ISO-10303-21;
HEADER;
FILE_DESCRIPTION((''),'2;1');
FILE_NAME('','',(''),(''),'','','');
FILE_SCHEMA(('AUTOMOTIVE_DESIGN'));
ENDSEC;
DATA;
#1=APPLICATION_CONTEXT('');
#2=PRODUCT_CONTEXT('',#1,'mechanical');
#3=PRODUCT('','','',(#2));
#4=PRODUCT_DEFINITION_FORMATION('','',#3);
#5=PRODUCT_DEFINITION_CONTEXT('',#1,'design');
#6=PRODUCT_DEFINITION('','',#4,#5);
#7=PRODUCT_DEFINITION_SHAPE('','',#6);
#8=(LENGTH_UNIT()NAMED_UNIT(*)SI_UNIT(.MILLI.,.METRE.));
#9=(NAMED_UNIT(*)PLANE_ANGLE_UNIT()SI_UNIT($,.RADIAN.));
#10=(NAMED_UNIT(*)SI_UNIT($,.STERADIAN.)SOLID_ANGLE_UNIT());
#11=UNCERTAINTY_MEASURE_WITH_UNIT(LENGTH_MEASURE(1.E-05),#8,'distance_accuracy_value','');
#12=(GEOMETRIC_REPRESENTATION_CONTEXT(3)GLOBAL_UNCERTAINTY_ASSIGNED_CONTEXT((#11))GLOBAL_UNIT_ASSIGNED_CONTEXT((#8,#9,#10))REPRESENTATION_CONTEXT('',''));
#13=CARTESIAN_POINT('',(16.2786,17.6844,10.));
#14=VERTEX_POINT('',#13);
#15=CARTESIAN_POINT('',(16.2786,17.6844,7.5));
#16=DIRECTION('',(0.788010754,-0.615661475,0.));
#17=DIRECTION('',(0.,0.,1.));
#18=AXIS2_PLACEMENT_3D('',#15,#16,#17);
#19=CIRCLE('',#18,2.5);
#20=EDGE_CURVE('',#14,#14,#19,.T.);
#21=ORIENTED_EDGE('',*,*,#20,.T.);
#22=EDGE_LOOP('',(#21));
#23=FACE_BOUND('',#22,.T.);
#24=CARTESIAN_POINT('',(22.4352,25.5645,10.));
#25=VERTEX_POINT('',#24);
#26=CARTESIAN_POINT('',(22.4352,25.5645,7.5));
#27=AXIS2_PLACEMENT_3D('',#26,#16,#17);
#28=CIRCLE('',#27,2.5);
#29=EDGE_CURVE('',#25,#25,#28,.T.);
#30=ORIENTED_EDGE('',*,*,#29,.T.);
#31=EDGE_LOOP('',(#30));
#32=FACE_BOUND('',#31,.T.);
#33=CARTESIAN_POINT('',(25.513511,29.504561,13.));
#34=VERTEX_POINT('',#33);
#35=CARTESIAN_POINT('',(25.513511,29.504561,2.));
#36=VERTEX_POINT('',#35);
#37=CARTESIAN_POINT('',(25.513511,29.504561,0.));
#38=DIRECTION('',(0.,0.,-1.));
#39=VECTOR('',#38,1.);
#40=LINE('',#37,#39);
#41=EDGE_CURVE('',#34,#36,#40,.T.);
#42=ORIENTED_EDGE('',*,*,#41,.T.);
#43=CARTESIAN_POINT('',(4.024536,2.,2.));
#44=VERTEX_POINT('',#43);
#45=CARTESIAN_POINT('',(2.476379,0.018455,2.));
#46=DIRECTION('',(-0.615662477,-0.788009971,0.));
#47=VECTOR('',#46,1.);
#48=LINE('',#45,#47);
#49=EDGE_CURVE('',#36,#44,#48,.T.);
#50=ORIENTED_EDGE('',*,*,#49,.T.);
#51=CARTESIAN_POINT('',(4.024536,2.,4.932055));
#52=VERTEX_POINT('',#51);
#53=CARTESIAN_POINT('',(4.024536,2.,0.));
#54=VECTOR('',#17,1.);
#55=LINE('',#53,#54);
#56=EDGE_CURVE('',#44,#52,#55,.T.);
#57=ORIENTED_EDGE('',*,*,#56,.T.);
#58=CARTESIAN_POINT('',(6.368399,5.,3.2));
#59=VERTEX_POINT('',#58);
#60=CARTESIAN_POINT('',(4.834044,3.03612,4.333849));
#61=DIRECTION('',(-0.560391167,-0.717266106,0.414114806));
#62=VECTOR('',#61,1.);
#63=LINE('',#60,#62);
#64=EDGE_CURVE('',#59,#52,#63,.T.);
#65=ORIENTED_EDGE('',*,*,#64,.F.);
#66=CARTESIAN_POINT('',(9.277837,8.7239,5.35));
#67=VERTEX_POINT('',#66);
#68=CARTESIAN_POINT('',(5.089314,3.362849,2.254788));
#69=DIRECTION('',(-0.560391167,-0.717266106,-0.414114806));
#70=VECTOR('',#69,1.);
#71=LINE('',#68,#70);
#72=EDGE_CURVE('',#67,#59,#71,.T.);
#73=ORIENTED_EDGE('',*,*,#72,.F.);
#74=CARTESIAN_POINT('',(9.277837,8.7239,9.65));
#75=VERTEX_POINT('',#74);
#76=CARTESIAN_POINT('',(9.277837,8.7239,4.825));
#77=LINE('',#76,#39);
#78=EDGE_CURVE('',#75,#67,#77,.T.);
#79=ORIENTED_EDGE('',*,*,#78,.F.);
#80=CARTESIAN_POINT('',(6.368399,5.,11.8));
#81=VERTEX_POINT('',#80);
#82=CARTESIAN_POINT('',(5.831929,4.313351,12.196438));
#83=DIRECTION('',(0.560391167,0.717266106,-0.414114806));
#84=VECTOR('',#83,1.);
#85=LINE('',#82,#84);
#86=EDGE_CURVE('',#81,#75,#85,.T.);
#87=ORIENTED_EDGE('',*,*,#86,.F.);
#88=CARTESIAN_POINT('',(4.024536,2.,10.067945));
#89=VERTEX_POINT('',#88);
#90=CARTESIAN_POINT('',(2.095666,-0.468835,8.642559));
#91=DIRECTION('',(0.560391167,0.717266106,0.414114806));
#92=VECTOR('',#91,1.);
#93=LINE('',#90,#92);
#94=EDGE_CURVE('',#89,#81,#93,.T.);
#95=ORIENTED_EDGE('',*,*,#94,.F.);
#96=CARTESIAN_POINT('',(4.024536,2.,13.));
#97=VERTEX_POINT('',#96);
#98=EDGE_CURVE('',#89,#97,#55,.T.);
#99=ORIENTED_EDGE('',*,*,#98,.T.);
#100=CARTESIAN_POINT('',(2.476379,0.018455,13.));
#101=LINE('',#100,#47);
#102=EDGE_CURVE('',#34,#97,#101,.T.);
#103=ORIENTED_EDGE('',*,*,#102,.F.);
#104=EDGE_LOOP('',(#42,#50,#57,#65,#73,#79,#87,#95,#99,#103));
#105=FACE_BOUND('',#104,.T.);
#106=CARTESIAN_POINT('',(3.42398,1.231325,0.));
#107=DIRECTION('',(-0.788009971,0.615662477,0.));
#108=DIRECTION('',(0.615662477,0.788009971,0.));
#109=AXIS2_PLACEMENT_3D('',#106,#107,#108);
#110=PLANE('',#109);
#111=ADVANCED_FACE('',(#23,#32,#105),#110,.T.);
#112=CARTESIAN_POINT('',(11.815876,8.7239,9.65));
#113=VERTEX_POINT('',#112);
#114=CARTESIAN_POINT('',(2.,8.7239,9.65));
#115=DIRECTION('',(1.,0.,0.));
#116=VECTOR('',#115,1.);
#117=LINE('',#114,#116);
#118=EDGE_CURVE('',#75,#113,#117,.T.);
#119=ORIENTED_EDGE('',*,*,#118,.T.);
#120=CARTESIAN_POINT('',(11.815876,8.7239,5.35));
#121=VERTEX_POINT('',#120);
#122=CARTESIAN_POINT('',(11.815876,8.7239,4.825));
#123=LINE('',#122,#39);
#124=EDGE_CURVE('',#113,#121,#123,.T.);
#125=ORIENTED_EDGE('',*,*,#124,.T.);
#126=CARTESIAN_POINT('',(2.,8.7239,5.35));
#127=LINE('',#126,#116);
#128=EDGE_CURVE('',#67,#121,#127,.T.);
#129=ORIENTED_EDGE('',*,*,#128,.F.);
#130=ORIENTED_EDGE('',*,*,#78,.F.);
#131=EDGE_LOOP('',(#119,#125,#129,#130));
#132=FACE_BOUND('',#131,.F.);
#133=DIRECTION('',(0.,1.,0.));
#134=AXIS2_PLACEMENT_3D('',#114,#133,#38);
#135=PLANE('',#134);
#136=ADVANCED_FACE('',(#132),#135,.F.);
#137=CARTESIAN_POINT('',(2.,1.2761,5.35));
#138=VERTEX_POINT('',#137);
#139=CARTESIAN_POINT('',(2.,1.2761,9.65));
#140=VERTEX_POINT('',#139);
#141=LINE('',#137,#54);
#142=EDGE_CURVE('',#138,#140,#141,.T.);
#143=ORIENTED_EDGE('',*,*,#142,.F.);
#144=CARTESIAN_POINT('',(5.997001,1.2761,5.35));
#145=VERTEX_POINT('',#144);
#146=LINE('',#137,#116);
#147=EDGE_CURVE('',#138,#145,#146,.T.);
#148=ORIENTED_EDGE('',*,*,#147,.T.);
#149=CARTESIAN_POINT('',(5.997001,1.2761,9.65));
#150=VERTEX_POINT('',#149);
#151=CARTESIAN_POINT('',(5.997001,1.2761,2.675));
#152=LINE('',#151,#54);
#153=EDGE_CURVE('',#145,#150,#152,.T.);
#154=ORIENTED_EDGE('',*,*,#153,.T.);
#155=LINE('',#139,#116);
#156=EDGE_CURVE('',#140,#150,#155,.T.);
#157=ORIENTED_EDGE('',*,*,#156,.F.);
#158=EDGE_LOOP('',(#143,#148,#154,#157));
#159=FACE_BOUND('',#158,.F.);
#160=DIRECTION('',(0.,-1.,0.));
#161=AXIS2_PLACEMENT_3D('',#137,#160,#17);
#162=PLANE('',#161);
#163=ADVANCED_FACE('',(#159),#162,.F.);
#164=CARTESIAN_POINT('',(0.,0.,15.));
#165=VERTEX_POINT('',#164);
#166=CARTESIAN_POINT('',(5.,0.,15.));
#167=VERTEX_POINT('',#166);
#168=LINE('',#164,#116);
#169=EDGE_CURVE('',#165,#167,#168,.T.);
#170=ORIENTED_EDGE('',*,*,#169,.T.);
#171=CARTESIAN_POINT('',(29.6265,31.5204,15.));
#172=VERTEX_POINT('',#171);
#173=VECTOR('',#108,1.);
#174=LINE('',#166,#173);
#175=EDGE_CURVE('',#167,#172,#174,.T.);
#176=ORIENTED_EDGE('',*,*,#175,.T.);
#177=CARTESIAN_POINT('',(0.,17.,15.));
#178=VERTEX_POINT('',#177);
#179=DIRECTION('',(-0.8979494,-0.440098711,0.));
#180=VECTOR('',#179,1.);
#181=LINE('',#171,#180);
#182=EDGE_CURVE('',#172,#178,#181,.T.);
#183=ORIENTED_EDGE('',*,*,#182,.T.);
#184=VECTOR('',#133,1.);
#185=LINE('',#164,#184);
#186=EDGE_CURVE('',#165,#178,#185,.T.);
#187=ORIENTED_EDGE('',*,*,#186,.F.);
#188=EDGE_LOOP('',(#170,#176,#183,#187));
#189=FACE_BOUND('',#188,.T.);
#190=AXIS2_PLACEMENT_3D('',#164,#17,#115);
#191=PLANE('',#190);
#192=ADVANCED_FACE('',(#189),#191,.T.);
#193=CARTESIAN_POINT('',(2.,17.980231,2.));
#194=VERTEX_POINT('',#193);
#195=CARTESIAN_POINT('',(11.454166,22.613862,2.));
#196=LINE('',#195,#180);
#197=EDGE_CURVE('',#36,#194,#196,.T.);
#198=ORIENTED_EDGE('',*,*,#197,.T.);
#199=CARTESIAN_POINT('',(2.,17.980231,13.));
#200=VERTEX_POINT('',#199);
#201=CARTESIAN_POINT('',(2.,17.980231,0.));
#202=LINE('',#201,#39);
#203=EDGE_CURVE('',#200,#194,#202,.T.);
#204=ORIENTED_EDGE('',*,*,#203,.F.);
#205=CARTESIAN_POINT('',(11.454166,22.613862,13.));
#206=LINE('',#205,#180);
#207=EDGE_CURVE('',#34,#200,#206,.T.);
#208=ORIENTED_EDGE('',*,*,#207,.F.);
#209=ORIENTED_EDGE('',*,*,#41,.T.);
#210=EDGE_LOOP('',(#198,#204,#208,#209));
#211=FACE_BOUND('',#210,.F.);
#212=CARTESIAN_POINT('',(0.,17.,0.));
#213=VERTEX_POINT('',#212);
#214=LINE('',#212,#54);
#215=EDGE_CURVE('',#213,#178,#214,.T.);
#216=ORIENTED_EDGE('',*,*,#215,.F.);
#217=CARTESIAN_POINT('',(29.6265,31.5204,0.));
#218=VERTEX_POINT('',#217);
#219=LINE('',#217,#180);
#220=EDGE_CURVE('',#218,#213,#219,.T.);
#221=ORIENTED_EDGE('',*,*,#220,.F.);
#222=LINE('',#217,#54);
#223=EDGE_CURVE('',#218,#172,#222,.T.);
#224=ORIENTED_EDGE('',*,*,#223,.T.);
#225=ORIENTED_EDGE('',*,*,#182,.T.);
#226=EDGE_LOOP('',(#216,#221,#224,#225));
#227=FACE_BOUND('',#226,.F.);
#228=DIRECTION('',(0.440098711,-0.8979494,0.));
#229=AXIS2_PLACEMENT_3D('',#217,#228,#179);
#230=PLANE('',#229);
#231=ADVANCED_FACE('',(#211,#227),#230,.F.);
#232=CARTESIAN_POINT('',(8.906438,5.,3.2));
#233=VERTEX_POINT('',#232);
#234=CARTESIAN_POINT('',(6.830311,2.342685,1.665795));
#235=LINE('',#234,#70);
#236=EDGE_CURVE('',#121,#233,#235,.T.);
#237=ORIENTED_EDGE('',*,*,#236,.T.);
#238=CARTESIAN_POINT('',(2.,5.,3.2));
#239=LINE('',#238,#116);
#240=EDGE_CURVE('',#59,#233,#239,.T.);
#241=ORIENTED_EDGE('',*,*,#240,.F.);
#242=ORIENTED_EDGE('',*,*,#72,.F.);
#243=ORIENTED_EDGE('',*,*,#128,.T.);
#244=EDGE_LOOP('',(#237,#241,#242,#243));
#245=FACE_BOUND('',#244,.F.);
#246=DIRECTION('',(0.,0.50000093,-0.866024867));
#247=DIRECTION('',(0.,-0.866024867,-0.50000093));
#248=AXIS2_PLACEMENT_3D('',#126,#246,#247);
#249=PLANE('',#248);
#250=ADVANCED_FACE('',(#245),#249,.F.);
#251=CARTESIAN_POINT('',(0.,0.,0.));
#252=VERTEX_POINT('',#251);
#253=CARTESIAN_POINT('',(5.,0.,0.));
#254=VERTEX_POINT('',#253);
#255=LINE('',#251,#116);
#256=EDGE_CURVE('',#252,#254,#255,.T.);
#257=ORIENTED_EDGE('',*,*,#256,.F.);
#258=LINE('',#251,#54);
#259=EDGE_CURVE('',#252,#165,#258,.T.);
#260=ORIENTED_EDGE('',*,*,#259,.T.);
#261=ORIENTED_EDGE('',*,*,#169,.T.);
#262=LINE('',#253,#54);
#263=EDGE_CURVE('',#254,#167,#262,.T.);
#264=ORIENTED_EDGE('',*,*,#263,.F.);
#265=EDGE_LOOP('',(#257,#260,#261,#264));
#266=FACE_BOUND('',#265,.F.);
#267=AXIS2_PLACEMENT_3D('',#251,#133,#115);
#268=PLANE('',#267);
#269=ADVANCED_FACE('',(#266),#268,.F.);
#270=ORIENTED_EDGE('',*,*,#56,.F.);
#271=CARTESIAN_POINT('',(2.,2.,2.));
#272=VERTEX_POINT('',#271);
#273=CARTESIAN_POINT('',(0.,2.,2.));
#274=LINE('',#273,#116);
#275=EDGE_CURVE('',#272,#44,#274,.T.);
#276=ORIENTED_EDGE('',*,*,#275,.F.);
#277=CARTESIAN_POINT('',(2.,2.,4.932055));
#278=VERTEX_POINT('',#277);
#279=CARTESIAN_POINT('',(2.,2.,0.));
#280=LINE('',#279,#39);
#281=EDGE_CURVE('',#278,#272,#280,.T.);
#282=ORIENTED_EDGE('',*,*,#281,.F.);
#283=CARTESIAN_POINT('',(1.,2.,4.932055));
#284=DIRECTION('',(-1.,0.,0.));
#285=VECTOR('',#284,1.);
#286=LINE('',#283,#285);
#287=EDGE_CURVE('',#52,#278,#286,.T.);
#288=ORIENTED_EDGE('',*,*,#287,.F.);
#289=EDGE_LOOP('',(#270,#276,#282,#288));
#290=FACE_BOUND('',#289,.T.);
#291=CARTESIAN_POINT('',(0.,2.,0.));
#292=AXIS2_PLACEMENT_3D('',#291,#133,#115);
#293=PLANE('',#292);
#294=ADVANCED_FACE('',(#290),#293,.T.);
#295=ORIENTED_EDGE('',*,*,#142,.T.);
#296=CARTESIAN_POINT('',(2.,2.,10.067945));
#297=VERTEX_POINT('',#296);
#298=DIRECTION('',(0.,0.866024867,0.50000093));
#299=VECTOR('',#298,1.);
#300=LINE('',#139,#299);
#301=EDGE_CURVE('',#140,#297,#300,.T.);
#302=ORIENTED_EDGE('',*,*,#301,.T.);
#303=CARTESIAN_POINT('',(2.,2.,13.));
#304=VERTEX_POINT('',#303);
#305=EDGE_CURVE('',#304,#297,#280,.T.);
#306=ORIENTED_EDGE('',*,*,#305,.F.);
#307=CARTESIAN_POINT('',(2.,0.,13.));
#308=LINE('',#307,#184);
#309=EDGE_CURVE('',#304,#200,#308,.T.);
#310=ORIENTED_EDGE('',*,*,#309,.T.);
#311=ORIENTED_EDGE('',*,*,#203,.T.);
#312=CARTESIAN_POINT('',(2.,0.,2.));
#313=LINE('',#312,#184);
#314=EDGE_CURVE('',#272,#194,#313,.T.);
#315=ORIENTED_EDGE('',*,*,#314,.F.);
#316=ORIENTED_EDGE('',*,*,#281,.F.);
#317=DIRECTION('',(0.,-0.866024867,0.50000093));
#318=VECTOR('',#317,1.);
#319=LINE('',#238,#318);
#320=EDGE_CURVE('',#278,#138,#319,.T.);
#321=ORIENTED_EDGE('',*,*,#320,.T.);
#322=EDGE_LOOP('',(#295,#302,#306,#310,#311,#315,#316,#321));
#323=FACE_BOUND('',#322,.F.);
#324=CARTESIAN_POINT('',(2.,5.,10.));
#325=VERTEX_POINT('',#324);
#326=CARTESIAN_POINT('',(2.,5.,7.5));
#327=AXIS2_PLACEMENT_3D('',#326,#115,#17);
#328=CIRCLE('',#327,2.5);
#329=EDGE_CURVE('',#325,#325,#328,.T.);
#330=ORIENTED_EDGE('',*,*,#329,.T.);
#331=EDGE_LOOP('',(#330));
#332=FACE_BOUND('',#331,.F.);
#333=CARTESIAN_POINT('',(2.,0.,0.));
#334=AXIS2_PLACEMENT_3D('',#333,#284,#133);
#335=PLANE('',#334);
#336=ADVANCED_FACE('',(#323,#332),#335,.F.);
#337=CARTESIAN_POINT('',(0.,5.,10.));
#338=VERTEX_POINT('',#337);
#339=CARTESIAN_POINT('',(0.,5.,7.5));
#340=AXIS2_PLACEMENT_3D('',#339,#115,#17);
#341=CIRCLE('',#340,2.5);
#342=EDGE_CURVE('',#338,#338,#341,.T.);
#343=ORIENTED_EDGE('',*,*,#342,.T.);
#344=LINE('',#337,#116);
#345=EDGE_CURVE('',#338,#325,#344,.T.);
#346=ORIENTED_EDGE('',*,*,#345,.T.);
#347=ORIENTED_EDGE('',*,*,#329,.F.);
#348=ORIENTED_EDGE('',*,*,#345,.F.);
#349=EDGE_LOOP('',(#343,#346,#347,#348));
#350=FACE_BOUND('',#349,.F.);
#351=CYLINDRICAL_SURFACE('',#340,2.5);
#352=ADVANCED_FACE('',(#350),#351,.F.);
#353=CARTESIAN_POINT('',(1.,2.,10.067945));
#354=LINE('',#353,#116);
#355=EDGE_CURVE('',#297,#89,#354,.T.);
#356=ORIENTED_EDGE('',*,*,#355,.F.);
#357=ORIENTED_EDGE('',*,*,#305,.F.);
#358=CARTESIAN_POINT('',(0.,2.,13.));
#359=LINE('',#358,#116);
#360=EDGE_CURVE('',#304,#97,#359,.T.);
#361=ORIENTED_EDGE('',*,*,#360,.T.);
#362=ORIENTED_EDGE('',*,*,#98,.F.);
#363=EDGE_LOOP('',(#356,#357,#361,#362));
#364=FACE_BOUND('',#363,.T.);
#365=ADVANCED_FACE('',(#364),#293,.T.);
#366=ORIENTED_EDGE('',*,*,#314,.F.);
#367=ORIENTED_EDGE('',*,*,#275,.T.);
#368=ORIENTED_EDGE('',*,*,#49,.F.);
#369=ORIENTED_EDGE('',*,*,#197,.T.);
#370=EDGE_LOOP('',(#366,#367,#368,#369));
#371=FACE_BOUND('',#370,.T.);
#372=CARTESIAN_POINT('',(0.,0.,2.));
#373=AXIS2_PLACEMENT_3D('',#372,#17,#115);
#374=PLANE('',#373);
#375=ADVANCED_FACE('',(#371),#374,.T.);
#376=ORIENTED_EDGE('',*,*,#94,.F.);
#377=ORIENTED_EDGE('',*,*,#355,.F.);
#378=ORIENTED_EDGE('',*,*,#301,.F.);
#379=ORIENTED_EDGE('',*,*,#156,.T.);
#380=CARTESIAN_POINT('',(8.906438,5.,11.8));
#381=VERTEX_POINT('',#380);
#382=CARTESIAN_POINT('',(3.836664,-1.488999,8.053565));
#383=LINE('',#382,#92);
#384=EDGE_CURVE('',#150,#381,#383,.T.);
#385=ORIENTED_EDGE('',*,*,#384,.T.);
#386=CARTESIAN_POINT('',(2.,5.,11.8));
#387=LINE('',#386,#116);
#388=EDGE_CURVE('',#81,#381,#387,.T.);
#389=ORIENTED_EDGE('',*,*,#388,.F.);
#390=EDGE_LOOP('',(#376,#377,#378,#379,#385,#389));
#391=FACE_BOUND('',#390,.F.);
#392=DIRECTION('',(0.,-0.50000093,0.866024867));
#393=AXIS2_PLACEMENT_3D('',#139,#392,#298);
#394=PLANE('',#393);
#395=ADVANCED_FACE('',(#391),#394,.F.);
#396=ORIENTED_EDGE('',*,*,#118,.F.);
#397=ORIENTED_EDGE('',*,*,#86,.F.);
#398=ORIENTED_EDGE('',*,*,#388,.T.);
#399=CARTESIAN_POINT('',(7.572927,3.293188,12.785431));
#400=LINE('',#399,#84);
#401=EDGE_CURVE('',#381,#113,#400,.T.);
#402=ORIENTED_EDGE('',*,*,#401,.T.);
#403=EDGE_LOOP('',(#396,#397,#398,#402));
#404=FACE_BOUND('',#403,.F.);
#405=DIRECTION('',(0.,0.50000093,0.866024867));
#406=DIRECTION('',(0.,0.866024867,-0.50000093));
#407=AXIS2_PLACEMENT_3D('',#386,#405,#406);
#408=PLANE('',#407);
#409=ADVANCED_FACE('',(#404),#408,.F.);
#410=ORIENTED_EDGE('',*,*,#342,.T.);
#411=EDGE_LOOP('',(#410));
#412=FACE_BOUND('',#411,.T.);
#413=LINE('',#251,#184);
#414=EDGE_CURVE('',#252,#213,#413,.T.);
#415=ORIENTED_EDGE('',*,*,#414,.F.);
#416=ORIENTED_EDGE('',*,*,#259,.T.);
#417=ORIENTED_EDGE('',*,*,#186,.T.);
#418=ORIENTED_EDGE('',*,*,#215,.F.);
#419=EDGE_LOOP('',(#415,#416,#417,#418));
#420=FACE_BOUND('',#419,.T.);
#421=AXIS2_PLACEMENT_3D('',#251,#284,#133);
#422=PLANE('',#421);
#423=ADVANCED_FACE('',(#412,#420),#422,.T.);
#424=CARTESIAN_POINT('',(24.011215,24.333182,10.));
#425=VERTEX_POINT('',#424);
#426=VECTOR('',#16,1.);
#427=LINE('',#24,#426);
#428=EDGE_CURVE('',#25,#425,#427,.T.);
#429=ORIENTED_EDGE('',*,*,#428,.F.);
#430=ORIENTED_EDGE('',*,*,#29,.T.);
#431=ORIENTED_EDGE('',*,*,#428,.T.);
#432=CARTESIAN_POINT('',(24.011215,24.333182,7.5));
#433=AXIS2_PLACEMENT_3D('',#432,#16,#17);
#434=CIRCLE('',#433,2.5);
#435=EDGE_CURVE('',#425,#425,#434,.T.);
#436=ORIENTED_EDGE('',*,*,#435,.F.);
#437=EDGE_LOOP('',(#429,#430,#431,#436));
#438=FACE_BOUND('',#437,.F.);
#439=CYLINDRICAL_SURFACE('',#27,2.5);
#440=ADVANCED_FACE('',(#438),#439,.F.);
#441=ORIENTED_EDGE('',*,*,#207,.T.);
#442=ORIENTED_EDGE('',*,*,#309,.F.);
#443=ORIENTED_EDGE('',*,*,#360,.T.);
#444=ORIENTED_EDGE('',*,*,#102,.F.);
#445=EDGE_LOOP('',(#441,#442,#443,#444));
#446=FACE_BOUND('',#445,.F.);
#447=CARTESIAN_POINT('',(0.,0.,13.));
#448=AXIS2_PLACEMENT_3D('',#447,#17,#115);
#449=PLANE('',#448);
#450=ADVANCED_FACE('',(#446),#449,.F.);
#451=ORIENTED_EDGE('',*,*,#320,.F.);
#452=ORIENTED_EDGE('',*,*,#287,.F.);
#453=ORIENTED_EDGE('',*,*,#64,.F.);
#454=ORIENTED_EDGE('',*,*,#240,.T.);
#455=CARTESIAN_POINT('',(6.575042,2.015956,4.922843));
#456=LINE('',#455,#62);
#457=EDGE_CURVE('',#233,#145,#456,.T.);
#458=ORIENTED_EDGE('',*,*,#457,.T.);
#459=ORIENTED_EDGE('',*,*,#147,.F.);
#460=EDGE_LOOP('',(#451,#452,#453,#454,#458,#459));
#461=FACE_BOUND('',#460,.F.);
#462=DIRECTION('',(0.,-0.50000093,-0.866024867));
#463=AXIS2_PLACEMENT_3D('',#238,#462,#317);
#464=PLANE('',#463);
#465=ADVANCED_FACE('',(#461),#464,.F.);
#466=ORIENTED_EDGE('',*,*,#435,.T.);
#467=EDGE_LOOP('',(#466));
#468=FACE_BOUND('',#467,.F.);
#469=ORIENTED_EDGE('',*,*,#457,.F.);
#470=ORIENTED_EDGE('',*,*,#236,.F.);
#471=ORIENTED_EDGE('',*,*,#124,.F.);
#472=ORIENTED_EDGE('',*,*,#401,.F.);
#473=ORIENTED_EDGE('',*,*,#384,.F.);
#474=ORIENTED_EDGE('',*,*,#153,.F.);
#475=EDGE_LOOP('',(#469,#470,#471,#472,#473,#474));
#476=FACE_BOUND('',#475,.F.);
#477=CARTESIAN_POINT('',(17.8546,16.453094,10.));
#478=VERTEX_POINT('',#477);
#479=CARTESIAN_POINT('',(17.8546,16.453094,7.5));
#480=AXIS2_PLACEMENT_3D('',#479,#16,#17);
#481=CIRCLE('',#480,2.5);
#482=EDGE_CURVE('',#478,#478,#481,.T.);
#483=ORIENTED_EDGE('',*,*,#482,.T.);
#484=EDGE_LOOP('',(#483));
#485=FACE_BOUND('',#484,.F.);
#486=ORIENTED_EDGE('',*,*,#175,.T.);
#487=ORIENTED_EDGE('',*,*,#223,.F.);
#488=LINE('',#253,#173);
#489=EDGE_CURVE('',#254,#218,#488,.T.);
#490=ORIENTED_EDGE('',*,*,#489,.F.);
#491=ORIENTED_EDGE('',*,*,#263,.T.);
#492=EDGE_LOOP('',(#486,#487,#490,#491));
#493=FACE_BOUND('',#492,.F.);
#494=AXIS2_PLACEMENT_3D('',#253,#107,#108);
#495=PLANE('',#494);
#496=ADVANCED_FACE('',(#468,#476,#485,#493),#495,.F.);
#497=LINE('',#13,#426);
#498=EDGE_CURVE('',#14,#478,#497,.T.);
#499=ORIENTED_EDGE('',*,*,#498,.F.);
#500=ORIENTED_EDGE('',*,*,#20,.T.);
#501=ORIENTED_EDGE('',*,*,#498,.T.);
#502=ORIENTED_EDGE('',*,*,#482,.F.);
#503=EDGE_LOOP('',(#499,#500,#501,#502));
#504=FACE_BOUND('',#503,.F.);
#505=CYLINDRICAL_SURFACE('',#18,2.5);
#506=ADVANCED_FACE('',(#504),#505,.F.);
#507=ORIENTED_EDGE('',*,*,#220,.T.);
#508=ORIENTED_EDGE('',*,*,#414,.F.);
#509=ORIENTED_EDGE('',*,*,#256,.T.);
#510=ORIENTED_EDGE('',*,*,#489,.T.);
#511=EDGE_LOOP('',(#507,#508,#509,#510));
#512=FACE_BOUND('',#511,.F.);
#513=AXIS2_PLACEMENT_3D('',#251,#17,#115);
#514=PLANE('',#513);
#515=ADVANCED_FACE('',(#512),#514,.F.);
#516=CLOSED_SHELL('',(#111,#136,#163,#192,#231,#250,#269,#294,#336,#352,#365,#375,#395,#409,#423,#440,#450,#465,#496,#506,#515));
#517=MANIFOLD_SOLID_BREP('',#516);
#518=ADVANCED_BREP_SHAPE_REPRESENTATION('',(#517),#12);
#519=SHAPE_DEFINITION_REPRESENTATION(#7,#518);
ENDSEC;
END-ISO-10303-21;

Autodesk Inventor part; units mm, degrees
ref_plane "YZ Plane" through (0, 0, 0) normal (1, 0, 0) x (0, 1, 0)
ref_plane "XZ Plane" through (0, 0, 0) normal (0, 1, 0) x (-1, 0, 0)
ref_plane "XY Plane" through (0, 0, 0) normal (0, 0, 1) x (1, 0, 0)
sketch "Skizze1" plane through (0, 0, 0) normal (0, 0, 1) x (1, 0, 0)
  line L0 (0, 0) -> (0, 17)
  line L1 (0, 0) -> (40, 0) construction
  line L2 (0, 0) -> (5, 0)
  line L3 (5, 0) -> (29.6265, 31.5204)
  line L4 (29.6265, 31.5204) -> (0, 17)
  dimension "d0" = 17
  dimension "d46" = 5
  dimension "d48" = 40
extrude "Extrusion1" add sketch "Skizze1" along normal blind 15
hole "Bohrung1" at (0, 5, 7.5) direction (1, 0, 0) diameter 5 end through all
shell "Wandstärke3" thickness 2 removed faces 2 at (9.8755, 21.8401, 5) at (3.6198, 7.5, 7.5084)
sketch "Skizze5" plane through (2, 2, 2) normal (1, 0, 0) x (0, 0, -1)
  circle A0 centre (-5.5, 3) radius 2.5 projected
  line L0 (-3.35, -0.7239) -> (-7.65, -0.7239)
  line L1 (-7.65, -0.7239) -> (-9.8, 3)
  line L2 (-9.8, 3) -> (-7.65, 6.7239)
  line L3 (-7.65, 6.7239) -> (-3.35, 6.7239)
  line L4 (-3.35, 6.7239) -> (-1.2, 3)
  line L5 (-1.2, 3) -> (-3.35, -0.7239)
  point P0 (2, -2)
  dimension "d71" = 4.3
extrude "Extrusion4" cut sketch "Skizze5" along normal blind 10
hole "Bohrung6" at (22.4352, 25.5645, 7.5) direction (0.7880108, -0.6156615, 0) diameter 5 end through all
hole "Bohrung7" at (16.2786, 17.6844, 7.5) direction (0.7880108, -0.6156615, 0) diameter 5 end through all
properties part number "Befestigung"
